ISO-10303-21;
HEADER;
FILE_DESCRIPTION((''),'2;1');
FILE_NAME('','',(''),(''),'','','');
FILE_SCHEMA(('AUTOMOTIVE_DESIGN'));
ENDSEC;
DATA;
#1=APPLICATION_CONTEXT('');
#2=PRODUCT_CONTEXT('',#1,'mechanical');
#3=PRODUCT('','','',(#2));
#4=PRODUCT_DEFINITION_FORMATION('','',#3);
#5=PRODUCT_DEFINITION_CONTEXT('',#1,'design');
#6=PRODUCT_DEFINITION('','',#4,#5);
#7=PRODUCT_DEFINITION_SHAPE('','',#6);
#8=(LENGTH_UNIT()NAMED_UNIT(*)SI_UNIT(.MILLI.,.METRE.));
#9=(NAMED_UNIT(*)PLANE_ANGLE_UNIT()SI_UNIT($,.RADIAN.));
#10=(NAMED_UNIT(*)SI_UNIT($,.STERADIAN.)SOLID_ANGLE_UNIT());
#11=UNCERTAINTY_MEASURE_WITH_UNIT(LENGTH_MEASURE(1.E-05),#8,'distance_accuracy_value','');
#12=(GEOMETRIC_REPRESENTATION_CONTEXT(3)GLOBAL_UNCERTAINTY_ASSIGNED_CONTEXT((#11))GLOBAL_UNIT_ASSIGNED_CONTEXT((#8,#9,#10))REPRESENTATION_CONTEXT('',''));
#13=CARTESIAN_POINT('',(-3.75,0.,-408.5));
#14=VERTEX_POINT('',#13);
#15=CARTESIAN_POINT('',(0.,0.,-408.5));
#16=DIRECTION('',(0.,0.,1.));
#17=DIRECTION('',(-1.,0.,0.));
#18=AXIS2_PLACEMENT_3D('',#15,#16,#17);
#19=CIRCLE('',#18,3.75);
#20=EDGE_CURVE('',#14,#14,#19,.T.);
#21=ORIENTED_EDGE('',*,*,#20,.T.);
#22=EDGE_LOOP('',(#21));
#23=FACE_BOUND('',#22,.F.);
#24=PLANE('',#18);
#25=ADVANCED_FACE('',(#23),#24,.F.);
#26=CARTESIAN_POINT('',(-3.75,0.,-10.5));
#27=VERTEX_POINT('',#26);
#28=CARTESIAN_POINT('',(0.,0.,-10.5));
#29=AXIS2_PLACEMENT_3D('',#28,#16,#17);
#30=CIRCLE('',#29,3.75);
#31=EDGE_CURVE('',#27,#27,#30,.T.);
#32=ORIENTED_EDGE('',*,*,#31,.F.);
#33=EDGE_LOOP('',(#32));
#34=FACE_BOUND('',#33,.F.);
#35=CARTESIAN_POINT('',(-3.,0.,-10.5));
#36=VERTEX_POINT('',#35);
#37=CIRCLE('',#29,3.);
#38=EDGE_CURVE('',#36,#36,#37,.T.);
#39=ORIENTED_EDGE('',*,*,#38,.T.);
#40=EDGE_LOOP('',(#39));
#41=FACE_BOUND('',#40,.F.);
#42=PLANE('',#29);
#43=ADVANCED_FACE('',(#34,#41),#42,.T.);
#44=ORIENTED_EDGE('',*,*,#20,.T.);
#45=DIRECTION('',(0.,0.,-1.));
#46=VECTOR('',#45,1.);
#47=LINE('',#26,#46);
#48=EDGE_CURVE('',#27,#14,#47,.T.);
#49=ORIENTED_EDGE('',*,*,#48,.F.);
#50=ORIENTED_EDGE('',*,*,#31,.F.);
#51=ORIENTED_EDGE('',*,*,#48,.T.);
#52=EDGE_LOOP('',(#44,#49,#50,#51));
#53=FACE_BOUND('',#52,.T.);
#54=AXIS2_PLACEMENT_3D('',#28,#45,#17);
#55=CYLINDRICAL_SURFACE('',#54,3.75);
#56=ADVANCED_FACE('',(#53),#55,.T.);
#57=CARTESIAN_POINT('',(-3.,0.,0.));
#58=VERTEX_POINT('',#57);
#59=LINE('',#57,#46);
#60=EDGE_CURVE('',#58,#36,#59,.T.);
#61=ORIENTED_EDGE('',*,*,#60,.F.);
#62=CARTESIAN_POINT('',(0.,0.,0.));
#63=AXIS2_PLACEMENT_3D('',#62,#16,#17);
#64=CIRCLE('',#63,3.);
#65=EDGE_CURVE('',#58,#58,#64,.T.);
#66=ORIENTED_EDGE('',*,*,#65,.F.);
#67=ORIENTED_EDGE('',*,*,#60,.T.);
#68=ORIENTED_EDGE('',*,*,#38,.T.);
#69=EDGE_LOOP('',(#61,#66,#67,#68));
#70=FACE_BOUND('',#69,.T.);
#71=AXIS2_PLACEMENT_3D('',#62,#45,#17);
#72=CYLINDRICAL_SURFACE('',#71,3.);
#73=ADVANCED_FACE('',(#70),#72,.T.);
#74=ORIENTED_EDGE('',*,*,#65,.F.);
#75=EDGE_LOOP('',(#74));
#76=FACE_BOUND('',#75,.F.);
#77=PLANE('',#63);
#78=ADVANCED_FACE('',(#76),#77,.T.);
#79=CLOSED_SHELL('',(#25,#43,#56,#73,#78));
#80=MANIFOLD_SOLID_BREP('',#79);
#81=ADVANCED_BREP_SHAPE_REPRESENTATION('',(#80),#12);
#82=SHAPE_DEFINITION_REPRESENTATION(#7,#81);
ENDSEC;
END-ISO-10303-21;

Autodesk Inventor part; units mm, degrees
ref_plane "YZ Plane" through (0, 0, 0) normal (1, 0, 0) x (0, 1, 0)
ref_plane "XZ Plane" through (0, 0, 0) normal (0, 1, 0) x (-1, 0, 0)
ref_plane "XY Plane" through (0, 0, 0) normal (0, 0, 1) x (1, 0, 0)
sketch "Skizze1" plane through (0, 0, 0) normal (0, 1, 0) x (-1, 0, 0)
  line L0 (0, 0) -> (3, 0)
  line L1 (3, 0) -> (3, -10.5)
  line L2 (3, -10.5) -> (3.75, -10.5)
  line L3 (3.75, -10.5) -> (3.75, -408.5)
  line L4 (3.75, -408.5) -> (0, -408.5)
  line L5 (0, -408.5) -> (0, 0)
  point P0 (1.5, 0)
  dimension "d0" = 10.5
  dimension "d1" = 398
  dimension "d3" = 6
  dimension "d4" = 7.5
revolve "Umdrehung1" add sketch "Skizze1" angle 360 about axis through (0, 0, -408.5) along (0, 0, 1)
thread "Gewinde1" size "M6x1" class "6g" standard "ISO Metric profile" full length
thread "Gewinde2" size "M8x1.25" class "6g" standard "ISO Metric profile" length 18
properties part number "welle" material "Glasfaserbeton"
